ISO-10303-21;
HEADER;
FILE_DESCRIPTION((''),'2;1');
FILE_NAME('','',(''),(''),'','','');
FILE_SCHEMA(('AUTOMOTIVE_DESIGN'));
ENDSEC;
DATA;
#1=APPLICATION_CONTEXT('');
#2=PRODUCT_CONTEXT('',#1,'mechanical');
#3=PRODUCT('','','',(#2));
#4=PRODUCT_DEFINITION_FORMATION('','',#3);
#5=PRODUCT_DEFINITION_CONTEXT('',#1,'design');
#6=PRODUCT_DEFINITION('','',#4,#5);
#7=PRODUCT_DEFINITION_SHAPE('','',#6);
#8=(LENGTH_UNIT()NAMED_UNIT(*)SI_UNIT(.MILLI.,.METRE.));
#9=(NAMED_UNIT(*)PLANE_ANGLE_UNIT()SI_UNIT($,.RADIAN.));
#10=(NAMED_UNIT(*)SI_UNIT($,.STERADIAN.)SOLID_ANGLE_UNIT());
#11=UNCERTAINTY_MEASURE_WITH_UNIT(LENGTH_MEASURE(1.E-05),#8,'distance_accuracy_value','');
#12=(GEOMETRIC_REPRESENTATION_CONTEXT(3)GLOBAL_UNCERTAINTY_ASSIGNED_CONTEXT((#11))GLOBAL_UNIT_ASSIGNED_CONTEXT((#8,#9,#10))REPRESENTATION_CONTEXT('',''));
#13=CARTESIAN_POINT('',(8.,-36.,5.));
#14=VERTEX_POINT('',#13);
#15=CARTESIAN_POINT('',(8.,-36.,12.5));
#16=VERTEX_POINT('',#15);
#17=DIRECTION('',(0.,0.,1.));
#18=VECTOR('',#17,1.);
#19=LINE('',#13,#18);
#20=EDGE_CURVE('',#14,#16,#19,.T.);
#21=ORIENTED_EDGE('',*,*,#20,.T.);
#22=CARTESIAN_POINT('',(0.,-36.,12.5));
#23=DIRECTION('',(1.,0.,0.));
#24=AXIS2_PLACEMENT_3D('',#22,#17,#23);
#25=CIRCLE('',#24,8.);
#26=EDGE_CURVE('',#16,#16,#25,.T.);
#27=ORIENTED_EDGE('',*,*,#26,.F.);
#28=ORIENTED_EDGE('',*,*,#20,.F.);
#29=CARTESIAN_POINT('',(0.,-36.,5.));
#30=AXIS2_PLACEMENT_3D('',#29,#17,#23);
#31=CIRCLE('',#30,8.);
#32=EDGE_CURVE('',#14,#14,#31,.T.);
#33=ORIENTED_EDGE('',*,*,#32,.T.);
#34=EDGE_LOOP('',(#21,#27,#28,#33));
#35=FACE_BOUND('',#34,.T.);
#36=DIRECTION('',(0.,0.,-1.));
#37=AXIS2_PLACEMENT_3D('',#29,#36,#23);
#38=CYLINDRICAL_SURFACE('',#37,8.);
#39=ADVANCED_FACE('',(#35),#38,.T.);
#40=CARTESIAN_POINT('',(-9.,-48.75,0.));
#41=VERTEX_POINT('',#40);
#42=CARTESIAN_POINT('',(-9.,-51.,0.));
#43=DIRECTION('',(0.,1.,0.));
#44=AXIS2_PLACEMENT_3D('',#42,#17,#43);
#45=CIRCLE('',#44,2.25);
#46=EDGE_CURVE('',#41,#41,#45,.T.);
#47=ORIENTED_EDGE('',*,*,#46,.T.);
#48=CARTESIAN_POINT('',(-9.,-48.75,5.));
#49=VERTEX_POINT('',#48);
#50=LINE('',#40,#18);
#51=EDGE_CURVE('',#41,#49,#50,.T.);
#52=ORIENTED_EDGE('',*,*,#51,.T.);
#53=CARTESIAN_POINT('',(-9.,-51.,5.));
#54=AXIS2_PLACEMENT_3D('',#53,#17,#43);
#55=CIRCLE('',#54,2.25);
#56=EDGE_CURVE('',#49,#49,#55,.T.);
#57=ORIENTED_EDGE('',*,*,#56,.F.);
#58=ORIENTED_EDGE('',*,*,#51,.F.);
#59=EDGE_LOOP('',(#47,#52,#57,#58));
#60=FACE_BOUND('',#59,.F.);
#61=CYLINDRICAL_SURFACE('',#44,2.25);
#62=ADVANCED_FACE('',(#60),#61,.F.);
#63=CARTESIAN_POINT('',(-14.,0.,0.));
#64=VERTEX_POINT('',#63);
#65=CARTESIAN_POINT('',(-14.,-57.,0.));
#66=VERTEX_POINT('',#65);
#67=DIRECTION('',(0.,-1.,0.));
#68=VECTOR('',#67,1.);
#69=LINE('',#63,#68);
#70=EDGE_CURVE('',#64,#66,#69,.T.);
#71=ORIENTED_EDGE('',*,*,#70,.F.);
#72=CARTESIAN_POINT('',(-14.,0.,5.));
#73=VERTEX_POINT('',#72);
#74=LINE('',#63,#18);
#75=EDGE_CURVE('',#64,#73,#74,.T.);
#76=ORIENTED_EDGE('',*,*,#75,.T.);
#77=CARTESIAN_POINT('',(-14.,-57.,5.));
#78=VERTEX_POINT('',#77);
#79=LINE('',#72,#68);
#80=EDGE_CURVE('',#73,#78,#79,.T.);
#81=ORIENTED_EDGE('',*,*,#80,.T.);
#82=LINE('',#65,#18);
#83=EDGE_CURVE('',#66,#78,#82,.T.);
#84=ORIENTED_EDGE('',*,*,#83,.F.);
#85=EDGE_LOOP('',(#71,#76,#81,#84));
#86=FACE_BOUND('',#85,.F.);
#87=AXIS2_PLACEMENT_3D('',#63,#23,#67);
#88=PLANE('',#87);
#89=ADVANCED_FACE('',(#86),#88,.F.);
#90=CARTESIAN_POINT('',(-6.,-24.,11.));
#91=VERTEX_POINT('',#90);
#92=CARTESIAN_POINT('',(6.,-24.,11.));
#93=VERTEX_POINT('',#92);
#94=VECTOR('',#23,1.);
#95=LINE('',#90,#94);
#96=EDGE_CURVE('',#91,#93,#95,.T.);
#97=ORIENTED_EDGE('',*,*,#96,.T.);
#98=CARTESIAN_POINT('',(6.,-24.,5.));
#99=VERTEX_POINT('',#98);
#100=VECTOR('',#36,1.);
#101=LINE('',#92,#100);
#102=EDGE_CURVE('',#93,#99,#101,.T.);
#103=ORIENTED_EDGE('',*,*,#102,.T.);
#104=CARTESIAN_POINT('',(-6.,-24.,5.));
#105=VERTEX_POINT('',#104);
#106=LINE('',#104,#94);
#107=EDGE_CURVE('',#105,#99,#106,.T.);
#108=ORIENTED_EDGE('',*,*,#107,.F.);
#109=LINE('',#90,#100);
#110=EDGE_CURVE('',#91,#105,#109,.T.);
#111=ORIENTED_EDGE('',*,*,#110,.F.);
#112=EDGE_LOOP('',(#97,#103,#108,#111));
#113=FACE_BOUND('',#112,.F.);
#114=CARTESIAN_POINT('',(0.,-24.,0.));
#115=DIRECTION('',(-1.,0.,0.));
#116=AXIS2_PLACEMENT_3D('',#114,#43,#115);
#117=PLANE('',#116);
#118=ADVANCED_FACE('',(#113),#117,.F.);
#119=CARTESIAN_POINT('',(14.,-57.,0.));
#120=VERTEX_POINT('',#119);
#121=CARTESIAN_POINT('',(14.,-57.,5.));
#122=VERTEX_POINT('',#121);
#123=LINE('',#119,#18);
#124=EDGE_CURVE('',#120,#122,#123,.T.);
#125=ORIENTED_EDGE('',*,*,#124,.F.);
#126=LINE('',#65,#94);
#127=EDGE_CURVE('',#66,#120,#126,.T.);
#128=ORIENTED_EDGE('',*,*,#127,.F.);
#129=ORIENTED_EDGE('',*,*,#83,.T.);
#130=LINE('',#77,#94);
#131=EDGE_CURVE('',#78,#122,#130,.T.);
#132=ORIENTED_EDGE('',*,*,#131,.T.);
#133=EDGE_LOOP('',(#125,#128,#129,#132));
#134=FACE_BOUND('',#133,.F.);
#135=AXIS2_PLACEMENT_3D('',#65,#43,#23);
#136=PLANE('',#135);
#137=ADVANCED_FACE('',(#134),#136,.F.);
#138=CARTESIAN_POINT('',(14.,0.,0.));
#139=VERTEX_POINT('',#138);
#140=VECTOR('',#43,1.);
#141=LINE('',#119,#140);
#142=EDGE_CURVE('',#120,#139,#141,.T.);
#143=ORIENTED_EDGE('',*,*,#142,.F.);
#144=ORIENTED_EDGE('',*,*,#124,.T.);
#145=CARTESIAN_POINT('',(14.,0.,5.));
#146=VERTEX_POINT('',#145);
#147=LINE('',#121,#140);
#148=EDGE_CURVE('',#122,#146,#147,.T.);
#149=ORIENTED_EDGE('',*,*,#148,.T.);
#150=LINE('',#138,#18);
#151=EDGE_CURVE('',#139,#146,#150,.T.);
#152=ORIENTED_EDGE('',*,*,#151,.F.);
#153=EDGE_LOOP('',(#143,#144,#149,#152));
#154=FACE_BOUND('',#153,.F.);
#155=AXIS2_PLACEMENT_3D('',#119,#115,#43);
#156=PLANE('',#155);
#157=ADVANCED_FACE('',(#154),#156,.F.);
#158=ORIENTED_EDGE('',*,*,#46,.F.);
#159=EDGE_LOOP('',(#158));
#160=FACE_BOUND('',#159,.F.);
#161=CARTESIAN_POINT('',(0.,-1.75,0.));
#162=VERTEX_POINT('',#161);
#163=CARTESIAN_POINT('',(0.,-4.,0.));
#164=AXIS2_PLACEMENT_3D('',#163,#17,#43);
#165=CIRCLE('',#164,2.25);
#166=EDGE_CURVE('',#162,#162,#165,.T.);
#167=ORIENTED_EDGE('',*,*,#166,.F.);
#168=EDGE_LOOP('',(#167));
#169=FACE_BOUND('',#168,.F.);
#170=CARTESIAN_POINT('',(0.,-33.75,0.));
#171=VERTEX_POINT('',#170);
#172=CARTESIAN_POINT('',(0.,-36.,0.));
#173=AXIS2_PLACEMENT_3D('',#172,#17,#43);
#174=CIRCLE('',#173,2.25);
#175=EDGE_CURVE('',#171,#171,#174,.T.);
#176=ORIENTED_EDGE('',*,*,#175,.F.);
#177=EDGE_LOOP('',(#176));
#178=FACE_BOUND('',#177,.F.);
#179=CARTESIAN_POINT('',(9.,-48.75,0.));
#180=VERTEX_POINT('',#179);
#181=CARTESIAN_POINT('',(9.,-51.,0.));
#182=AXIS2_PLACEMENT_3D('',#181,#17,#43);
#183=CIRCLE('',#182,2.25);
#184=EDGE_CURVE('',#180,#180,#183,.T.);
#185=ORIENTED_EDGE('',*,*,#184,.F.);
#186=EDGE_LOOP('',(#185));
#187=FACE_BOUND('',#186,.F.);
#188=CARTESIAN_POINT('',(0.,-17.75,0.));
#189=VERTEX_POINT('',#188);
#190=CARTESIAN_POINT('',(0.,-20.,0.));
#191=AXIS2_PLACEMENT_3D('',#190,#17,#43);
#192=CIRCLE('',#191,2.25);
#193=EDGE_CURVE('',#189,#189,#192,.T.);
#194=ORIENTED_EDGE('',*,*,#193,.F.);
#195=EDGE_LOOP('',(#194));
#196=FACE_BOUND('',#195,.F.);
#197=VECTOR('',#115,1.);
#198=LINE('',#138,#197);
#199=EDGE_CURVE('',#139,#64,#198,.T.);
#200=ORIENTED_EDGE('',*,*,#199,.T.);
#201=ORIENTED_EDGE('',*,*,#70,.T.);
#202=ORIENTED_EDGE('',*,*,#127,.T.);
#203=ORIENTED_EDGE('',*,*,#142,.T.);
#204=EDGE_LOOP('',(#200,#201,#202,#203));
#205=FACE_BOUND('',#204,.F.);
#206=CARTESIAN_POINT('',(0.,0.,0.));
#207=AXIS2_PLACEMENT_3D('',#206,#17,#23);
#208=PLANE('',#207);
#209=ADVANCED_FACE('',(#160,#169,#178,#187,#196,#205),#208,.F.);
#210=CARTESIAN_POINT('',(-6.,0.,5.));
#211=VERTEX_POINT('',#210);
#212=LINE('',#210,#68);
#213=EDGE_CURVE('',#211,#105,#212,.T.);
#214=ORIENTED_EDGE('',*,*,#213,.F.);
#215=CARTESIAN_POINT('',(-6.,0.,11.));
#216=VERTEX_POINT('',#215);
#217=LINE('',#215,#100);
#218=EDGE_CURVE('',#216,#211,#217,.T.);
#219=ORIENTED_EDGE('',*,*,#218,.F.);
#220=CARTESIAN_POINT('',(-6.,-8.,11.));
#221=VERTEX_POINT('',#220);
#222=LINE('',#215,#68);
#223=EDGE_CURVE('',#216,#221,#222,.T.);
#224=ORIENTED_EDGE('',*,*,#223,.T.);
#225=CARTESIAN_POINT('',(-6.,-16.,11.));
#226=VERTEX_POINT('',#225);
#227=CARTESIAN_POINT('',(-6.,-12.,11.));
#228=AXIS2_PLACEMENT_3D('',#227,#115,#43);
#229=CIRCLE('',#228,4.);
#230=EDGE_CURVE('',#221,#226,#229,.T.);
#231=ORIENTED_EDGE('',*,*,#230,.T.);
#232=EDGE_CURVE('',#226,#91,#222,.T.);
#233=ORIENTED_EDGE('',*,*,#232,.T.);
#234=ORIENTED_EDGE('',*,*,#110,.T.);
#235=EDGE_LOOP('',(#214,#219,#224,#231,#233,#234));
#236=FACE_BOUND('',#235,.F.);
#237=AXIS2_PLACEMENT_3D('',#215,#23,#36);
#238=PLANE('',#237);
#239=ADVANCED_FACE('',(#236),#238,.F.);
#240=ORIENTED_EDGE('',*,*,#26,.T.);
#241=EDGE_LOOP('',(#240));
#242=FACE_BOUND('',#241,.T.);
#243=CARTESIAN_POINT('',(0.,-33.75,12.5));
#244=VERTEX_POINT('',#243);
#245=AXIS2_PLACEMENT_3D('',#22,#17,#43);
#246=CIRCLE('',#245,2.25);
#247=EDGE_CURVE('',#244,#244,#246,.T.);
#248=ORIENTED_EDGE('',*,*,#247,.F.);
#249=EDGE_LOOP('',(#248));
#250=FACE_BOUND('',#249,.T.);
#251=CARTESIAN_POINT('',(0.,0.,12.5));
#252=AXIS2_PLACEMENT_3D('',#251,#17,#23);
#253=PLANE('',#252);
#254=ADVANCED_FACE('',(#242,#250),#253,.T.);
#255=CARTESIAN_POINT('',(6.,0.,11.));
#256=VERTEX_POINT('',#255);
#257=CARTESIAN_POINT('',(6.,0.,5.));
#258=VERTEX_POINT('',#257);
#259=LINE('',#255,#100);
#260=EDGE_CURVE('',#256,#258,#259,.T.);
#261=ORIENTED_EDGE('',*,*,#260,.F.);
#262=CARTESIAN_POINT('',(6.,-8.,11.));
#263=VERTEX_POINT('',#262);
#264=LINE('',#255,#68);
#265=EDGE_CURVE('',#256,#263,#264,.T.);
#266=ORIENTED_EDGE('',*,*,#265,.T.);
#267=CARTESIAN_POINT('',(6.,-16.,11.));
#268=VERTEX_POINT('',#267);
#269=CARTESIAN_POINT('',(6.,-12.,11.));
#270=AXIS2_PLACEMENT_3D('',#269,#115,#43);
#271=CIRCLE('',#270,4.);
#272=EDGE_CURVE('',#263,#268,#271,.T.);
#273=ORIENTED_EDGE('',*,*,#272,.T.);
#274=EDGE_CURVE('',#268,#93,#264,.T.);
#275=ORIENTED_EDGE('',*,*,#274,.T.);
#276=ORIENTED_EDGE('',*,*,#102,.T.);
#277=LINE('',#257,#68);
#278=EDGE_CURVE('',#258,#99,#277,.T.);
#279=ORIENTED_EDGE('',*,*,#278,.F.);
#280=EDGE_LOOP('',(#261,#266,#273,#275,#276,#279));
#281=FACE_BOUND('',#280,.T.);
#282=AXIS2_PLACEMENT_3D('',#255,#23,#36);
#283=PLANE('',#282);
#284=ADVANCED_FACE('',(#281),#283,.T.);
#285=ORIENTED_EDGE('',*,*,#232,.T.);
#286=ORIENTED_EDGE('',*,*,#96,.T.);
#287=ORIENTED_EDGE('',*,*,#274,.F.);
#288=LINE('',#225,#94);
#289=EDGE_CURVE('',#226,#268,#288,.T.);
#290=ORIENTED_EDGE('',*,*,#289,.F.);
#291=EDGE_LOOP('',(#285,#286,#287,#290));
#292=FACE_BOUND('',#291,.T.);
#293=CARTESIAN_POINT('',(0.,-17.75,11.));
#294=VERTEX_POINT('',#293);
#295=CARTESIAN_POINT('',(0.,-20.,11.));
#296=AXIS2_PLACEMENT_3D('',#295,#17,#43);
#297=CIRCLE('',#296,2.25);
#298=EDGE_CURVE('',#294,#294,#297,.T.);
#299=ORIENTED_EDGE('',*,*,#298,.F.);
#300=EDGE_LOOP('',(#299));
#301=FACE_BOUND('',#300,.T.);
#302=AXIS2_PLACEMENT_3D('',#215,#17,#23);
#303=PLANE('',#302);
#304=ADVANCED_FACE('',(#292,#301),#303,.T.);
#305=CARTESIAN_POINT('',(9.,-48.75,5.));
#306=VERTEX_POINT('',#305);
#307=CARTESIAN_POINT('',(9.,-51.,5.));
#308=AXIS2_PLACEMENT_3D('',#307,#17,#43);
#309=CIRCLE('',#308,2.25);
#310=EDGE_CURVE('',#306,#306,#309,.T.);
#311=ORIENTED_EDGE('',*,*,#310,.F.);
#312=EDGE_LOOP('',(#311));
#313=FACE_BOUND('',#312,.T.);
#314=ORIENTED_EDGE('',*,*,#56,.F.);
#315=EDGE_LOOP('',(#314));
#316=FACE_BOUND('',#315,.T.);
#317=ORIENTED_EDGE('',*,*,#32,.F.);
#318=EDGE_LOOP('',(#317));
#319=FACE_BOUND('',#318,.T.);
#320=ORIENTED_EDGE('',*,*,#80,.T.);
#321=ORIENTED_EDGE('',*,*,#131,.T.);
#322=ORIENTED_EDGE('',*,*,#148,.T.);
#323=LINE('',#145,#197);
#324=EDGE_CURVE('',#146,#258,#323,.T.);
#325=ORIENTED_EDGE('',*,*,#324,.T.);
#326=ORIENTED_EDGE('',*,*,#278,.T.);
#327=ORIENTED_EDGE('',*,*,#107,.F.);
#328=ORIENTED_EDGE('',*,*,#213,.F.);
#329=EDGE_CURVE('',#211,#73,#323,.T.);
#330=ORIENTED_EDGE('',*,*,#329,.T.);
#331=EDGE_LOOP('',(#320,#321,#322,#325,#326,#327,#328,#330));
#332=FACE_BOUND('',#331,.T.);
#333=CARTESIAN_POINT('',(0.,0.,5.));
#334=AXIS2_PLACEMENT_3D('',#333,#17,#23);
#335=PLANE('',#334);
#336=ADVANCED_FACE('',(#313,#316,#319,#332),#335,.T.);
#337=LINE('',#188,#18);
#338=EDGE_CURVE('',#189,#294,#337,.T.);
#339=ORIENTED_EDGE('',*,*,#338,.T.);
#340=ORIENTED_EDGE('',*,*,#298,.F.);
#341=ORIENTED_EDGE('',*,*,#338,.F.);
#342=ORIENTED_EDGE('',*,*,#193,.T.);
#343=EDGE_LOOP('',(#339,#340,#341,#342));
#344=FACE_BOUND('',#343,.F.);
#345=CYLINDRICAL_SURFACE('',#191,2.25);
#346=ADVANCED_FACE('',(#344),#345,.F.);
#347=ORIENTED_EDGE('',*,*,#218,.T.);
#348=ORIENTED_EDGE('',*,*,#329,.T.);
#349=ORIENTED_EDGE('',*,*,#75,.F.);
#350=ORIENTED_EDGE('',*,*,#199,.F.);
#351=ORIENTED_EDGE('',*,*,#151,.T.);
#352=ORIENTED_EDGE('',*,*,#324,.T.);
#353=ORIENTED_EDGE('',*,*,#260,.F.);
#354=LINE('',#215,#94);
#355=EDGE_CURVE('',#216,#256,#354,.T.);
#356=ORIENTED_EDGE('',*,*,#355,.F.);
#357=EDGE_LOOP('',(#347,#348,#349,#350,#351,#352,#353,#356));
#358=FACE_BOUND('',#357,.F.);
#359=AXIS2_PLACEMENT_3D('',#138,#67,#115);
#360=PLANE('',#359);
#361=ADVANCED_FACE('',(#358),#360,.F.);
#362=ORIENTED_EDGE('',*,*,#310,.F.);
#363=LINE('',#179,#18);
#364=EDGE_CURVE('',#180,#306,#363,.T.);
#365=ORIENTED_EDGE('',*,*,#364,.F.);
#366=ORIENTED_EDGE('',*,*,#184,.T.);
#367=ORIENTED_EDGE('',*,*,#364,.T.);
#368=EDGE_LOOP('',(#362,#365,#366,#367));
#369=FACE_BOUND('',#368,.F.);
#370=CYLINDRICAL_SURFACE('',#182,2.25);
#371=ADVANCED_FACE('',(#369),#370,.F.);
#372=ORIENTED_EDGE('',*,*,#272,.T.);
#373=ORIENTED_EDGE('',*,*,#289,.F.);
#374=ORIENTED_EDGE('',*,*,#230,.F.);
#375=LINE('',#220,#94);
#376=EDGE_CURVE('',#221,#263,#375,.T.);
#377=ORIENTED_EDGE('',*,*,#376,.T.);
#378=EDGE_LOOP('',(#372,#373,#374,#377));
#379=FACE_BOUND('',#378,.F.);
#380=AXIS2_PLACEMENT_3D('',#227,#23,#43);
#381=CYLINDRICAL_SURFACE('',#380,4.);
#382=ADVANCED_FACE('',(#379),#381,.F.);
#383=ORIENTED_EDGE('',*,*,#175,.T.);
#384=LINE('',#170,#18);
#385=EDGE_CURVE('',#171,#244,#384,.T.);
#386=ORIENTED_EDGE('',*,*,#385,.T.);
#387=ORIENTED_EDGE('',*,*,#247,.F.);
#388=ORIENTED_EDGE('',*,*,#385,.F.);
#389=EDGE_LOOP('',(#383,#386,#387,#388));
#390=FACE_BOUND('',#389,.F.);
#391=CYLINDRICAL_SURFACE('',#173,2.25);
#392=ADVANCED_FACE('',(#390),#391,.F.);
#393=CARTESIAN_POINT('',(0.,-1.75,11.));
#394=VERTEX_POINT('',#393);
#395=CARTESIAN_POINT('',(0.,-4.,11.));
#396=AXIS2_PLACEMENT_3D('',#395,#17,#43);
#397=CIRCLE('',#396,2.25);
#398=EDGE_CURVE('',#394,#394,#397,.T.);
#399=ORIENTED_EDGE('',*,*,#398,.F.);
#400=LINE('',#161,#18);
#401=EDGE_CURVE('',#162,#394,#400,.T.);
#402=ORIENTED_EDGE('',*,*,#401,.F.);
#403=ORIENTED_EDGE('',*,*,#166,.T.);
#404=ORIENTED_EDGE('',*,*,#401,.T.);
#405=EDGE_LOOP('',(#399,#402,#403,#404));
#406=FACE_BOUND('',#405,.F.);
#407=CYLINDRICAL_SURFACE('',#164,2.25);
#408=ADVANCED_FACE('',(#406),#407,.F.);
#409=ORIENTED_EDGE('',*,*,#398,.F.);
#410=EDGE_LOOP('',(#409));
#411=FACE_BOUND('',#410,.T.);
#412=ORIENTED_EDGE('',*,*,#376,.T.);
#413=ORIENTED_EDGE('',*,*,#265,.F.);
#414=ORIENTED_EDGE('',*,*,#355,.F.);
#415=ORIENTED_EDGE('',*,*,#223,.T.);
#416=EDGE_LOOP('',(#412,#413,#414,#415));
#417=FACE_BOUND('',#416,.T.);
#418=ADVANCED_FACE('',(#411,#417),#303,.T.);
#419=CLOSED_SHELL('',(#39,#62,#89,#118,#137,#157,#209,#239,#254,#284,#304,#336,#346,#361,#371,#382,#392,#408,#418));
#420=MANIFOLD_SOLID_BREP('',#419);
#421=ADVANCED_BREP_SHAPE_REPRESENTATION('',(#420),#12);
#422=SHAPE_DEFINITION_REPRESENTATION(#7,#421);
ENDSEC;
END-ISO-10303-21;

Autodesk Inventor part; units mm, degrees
ref_plane "YZ Plane" through (0, 0, 0) normal (1, 0, 0) x (0, 1, 0)
ref_plane "XZ Plane" through (0, 0, 0) normal (0, 1, 0) x (-1, 0, 0)
ref_plane "XY Plane" through (0, 0, 0) normal (0, 0, 1) x (1, 0, 0)
sketch "Sketch1" plane through (0, 0, 0) normal (0, 0, 1) x (1, 0, 0)
  line L0 (-14, 0) -> (-14, -57)
  line L1 (14, -57) -> (14, 0)
  line L2 (14, 0) -> (-14, 0)
  line L3 (-14, -57) -> (14, -57)
extrude "Extrusion3" add sketch "Sketch1" along normal blind 5
sketch "Sketch2" plane through (0, 0, 5) normal (0, 0, 1) x (1, 0, 0)
  circle A0 centre (0, -36) radius 8
extrude "Extrusion2" add sketch "Sketch2" along normal blind 7.5
sketch "Sketch3" plane through (0, 0, 0) normal (0, 1, 0) x (-1, 0, 0)
  line L0 (6, 5) -> (-6, 5)
  line L1 (6, 11) -> (-6, 11)
  line L2 (6, 11) -> (6, 5)
  line L3 (-6, 11) -> (-6, 5)
extrude "Extrusion1" add sketch "Sketch3" against normal blind 24
hole "Hole5" at (0, -36, 0) direction (0, 0, 1) diameter 4.5 depth 12.5
hole "Hole4" at (9, -51, 0) direction (0, 0, 1) diameter 4.5 depth 5
sketch "Sketch6" plane through (0, 0, 0) normal (0, 0, 1) x (1, 0, 0)
  point P0 (-9, -51)
hole "Hole3" at (-9, -51, 0) direction (0, 0, 1) diameter 4.5 depth 5
sketch "Sketch5" plane through (0, 0, 0) normal (0, 0, 1) x (1, 0, 0)
  point P0 (9, -51)
hole "Hole2" at (0, -20, 0) direction (0, 0, 1) diameter 4.5 depth 11
sketch "Sketch4" plane through (0, 0, 0) normal (0, 0, 1) x (1, 0, 0)
  point P0 (0, -36)
hole "Hole1" at (0, -4, 0) direction (0, 0, 1) diameter 4.5 depth 11
sketch "Sketch9" plane through (-6, 0, 11) normal (0, 0, 1) x (1, 0, 0)
  line L0 (0, -8) -> (12, -8)
  line L1 (0, -8) -> (0, -12)
  line L2 (12, -8) -> (12, -12)
  line L3 (0, -12) -> (12, -12)
  line L4 (0, -12) -> (10, -12)
revolve "Revolution1" cut sketch "Sketch9" angle 180 about axis through (-6, -12, 11) along (-1, 0, 0)
sketch "Sketch7" plane through (0, 0, 0) normal (0, 0, 1) x (1, 0, 0)
  point P0 (0, -20)
sketch "Sketch8" plane through (0, 0, 0) normal (0, 0, 1) x (1, 0, 0)
  point P0 (0, -4)
properties part number "X-axis Idler" material "ASA Plastic"
